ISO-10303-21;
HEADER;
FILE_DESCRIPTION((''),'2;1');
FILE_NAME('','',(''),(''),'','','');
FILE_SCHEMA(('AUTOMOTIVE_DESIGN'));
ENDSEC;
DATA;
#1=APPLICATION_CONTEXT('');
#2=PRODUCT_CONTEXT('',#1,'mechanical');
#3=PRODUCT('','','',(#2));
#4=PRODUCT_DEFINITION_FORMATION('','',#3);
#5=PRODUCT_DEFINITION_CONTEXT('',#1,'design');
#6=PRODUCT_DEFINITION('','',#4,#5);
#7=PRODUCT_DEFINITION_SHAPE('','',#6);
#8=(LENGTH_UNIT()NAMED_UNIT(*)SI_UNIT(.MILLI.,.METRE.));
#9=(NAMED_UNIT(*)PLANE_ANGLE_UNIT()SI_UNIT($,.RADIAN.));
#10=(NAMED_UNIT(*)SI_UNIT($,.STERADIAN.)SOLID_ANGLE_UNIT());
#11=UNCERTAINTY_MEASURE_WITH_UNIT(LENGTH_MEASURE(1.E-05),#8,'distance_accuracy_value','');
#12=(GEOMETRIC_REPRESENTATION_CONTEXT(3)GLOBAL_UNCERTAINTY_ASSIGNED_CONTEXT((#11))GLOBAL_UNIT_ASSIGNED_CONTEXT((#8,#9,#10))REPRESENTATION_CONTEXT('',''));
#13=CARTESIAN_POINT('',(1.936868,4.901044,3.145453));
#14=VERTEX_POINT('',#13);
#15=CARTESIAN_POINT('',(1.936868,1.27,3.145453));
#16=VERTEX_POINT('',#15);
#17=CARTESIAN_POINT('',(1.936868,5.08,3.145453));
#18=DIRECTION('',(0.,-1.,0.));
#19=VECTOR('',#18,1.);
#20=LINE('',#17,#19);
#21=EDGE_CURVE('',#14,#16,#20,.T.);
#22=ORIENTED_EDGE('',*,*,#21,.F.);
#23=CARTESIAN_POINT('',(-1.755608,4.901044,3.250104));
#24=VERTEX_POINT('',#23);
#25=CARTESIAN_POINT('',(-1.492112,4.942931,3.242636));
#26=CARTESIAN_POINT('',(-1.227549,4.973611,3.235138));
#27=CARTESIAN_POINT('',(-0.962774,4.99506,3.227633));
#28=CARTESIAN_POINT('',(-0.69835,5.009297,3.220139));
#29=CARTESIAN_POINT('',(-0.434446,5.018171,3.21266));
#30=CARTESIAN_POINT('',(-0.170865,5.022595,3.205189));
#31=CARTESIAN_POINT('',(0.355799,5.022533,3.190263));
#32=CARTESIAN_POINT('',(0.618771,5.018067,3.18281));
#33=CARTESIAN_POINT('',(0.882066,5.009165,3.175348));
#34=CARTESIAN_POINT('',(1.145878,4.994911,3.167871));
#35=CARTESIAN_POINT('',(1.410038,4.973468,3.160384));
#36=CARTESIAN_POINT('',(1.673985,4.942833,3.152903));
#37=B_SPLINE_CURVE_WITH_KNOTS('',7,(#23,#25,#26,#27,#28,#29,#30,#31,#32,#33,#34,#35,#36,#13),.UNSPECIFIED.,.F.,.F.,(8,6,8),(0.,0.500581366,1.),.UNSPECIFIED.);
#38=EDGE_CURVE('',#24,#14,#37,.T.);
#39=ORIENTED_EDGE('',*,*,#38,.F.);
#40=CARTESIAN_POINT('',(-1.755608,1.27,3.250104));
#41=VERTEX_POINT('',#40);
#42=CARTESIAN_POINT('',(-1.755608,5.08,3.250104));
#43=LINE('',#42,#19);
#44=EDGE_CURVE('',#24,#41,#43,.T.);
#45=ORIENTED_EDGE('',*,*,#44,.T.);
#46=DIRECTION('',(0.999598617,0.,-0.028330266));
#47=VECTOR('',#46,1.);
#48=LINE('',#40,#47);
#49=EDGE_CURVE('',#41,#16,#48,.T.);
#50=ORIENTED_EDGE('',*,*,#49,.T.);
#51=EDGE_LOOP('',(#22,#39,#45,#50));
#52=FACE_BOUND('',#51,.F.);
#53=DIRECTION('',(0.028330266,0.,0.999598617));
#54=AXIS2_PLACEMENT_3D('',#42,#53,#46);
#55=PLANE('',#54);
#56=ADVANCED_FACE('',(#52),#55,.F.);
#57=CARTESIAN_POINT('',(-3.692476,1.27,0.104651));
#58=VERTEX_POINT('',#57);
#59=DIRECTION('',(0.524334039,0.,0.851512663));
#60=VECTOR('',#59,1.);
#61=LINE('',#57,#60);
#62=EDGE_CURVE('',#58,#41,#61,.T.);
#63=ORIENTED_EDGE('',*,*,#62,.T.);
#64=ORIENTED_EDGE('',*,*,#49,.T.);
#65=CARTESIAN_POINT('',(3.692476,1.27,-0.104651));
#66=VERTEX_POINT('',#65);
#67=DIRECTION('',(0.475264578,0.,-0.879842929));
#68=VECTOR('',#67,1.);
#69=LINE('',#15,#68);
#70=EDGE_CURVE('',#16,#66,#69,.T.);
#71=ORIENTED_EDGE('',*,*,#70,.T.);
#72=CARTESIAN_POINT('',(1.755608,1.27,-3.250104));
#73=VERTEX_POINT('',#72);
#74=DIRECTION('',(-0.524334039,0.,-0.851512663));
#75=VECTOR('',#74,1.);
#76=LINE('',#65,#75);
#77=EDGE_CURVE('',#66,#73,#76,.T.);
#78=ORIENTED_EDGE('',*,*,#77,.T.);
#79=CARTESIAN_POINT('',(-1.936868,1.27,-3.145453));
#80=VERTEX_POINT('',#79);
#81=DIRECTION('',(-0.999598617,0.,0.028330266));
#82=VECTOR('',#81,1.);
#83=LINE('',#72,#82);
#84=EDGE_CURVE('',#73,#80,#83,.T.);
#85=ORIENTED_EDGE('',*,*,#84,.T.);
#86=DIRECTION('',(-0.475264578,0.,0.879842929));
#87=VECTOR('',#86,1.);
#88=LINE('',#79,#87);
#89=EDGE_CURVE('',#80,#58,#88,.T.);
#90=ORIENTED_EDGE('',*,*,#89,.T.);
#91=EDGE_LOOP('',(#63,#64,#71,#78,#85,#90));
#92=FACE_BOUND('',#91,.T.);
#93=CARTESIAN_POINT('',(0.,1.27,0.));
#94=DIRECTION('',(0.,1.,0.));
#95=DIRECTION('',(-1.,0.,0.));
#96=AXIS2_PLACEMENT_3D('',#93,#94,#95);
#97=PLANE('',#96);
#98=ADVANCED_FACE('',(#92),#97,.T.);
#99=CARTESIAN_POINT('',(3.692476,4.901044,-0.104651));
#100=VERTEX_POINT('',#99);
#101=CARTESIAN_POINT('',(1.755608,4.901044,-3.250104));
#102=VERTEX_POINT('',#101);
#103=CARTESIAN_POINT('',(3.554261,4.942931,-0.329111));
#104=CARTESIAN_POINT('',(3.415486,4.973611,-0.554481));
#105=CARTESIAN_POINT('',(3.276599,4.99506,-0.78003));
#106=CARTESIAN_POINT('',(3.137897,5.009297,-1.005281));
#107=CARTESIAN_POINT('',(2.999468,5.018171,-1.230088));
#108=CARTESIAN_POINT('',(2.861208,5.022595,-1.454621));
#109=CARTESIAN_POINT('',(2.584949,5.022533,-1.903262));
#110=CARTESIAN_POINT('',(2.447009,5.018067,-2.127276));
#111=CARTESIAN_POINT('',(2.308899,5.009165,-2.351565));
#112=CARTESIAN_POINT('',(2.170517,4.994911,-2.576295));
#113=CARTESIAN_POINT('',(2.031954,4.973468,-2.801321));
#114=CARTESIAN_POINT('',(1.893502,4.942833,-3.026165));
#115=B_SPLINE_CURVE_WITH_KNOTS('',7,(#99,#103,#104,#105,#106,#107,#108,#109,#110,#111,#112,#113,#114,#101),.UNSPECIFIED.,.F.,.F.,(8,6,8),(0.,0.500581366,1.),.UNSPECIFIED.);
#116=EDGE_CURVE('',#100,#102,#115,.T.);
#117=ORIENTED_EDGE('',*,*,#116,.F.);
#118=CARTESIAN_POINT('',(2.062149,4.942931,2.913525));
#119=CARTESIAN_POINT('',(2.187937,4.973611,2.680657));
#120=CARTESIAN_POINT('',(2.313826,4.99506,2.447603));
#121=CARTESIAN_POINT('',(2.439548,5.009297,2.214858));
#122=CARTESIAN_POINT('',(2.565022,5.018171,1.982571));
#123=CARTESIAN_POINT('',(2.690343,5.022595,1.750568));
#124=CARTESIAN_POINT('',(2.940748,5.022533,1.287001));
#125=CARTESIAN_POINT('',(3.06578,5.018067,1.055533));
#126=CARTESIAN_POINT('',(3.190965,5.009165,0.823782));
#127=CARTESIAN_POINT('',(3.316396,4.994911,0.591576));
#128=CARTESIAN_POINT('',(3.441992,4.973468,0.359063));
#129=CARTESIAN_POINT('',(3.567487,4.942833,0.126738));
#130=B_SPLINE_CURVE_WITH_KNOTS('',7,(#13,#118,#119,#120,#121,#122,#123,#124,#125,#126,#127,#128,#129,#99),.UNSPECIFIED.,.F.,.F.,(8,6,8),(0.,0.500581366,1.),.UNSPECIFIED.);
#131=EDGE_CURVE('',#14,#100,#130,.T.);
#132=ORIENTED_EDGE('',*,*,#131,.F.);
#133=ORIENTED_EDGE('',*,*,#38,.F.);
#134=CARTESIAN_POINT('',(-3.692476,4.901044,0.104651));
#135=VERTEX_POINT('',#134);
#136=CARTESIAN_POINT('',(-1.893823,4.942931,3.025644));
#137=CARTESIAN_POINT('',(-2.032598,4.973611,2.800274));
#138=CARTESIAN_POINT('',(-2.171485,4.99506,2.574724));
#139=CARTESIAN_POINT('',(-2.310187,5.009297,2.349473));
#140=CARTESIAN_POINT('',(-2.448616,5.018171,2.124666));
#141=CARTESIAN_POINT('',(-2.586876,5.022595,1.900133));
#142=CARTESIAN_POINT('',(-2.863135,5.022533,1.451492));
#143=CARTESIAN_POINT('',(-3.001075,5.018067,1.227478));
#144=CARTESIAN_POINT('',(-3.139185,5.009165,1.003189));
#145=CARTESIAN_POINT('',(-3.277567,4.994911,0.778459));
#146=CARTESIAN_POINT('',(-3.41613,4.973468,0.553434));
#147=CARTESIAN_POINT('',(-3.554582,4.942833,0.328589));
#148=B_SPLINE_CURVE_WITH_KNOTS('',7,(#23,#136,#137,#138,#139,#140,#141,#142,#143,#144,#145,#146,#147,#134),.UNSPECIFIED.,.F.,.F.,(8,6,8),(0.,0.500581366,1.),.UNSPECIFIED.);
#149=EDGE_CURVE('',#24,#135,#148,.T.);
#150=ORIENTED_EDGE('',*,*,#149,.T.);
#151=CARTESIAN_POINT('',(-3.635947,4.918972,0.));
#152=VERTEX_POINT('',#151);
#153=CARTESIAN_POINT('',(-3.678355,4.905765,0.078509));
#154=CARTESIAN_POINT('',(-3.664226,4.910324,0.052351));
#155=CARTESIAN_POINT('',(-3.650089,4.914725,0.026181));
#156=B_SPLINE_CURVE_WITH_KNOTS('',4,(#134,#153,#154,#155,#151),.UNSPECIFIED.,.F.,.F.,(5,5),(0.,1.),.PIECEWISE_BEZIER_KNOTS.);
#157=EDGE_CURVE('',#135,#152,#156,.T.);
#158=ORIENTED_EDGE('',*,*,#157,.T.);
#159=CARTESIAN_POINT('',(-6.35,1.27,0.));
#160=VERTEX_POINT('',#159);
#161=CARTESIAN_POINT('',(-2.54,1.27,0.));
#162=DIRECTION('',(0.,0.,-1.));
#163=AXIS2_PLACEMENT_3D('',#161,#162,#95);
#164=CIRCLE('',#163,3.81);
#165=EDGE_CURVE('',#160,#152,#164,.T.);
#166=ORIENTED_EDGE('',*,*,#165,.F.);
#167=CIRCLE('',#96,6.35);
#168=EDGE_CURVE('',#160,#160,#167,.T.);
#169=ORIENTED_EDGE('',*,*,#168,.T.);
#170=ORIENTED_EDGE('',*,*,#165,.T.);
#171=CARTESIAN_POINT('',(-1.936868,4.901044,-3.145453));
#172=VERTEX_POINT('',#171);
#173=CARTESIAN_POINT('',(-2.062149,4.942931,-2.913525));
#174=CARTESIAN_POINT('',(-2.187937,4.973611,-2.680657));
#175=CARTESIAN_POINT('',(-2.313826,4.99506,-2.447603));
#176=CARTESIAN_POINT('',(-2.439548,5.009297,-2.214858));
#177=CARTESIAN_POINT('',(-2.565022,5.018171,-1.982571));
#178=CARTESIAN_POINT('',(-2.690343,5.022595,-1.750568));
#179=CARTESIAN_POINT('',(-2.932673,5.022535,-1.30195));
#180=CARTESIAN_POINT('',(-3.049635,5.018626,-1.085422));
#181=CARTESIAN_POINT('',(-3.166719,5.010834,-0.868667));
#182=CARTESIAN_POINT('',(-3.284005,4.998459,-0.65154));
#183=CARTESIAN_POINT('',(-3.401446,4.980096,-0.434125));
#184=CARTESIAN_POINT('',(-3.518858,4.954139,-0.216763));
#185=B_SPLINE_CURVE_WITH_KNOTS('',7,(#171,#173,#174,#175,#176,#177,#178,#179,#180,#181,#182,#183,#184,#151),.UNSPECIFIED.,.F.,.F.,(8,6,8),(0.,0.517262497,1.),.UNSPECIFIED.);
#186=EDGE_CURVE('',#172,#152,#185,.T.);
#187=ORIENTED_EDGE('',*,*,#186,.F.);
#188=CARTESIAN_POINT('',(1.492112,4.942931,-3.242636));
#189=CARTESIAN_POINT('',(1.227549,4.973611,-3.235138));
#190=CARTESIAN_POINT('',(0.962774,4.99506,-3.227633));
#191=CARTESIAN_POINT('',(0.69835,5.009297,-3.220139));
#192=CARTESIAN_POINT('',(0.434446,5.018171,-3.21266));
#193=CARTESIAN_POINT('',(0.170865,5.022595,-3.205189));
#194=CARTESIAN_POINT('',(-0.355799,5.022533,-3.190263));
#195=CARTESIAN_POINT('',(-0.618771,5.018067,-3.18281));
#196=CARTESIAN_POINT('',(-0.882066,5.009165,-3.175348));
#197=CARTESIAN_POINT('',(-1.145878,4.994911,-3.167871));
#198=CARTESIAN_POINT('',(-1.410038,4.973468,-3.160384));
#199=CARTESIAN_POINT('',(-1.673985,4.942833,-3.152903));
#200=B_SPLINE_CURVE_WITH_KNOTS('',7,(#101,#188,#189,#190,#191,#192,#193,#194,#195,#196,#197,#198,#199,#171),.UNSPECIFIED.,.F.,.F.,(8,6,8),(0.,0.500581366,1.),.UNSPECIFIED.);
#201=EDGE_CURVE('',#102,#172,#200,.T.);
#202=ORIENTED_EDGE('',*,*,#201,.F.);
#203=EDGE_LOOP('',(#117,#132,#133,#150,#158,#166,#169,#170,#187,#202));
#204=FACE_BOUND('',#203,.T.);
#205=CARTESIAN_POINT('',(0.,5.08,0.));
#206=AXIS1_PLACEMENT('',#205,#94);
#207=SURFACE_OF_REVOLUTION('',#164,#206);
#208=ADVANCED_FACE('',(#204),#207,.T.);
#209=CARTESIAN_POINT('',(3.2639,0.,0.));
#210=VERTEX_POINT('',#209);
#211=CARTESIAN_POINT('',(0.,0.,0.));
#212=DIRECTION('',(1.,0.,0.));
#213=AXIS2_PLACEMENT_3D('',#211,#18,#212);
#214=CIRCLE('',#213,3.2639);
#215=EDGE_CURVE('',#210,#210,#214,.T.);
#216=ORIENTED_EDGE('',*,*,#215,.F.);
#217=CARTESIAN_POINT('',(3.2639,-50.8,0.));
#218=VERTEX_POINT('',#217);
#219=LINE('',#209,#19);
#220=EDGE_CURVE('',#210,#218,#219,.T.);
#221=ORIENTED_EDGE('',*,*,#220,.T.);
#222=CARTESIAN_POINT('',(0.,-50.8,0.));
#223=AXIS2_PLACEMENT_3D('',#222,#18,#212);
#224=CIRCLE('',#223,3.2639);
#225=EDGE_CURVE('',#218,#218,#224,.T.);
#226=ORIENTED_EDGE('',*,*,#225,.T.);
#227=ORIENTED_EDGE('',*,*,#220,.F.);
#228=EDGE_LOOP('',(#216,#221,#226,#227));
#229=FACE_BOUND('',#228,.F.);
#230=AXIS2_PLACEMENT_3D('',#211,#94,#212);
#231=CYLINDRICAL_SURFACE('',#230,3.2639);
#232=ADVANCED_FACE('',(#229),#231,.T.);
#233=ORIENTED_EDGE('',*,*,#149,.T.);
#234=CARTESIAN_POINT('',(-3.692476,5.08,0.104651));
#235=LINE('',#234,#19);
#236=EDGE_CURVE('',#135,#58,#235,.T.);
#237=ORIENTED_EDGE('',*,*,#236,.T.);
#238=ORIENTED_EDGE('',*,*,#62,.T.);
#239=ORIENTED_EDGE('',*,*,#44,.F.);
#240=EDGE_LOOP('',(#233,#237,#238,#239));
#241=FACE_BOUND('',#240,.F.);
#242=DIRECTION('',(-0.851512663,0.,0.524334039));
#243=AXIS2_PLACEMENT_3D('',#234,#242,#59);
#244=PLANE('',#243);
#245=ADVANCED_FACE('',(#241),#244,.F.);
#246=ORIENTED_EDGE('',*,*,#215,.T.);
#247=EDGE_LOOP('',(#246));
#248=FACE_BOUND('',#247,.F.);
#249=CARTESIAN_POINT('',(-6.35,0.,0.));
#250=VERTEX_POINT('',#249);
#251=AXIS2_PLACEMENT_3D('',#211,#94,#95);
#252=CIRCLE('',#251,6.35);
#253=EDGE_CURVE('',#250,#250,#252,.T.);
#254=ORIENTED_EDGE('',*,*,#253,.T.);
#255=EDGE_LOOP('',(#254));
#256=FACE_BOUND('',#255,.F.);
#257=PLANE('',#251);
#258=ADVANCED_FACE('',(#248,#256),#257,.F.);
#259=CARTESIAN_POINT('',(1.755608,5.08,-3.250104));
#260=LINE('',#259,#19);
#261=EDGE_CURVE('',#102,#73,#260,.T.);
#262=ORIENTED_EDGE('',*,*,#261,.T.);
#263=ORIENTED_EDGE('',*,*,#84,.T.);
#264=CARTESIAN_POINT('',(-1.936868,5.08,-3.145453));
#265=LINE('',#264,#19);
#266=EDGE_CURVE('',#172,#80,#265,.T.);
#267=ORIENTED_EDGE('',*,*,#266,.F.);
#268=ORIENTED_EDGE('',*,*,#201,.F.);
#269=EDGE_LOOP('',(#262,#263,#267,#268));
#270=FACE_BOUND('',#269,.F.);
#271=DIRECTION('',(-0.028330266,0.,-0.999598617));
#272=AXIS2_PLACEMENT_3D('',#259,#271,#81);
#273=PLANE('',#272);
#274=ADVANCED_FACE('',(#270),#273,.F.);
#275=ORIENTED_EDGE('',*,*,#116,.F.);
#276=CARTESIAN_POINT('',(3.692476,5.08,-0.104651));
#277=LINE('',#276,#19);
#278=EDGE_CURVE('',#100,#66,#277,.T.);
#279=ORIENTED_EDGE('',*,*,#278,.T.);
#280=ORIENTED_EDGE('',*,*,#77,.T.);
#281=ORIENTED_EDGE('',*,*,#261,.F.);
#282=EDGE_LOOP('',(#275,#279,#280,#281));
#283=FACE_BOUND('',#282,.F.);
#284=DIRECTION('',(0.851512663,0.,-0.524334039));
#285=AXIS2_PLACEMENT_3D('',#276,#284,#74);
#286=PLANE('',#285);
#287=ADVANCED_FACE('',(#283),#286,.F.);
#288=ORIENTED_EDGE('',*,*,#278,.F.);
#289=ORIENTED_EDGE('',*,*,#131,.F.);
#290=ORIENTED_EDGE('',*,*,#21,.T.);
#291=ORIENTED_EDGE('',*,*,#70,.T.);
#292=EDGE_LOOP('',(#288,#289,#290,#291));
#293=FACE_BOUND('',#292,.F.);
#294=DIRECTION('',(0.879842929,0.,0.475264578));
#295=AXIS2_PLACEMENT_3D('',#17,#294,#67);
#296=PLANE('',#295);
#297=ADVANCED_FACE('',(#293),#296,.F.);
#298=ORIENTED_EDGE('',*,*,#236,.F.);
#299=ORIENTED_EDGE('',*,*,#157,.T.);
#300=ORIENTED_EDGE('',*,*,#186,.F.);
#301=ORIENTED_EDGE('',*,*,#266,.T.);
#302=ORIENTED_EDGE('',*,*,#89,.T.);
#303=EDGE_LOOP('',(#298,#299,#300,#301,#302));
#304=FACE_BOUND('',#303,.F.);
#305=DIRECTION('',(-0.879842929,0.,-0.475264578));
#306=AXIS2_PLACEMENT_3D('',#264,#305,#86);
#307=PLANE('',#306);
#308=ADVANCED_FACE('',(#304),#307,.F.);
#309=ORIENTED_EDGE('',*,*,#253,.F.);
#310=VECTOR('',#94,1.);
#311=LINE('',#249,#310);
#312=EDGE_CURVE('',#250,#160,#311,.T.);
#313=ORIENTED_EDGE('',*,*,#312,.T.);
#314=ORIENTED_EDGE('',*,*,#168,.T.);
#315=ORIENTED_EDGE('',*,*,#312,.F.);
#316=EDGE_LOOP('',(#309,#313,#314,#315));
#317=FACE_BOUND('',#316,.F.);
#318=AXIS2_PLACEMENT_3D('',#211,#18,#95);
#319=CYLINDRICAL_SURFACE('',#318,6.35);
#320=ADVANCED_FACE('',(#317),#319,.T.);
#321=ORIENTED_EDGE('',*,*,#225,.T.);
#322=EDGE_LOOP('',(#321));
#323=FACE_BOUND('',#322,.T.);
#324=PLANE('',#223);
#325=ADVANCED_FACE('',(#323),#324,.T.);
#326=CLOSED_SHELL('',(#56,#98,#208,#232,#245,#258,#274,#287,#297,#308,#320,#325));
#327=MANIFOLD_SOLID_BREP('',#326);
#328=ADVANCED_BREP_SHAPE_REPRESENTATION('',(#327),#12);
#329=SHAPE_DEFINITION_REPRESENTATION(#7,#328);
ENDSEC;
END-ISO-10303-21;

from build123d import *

# Parameters (mm, degrees)
F0_R     = 3.2639
F1_DEPTH = 50.8
F2_R     = 6.35
F2_R_2   = 3.2639
F3_DEPTH = 5.08
F5_DEPTH = 3.81


# Not quite as in the source:
# - a fillet or chamfer that OpenCascade refuses, or shapes differently, is made with other operations: its cross-section is extruded or revolved along the edge and cut away or added


with BuildPart() as f1:
    # F0 (on Front) → F1 (new body)
    with BuildSketch(Plane.XZ):
        Circle(F0_R)
    extrude(amount=F1_DEPTH)

    # F2 (on face) → F3 (join)
    with BuildSketch(Plane(origin=(0, 0, 0), x_dir=(-1, 0, 0), z_dir=(0, 1, 0))):
        Circle(F2_R)
        Circle(F2_R_2, mode=Mode.SUBTRACT)
        Circle(F2_R_2)
    extrude(amount=F3_DEPTH)

    # F4 (on face) → F5 (cut)
    with BuildSketch(Plane(origin=(0, 5.08, 0), x_dir=(-1, 0, 0), z_dir=(0, 1, 0))):
        Polygon((-1.9368684152, 3.1454528216), (-3.6924762575, -0.1046508405), (-1.7556078423, -3.2501036622), (1.9368684152, -3.1454528216), (3.6924762575, 0.1046508405), (1.7556078423, 3.2501036622), align=None)
    extrude(amount=-F5_DEPTH, mode=Mode.SUBTRACT)

    # F6: fillet of radius 3.81 on 1 edges, made by hand

    # F6_s1 → F6_t2 (revolve, cut)
    with BuildSketch(Plane.XY):
        with BuildLine():
            ThreePointArc((-6.35, 1.27), (-5.2340768363, 3.9640768363), (-2.54, 5.08))
            Line((-2.54, 5.08), (-6.35, 5.08))
            Line((-6.35, 5.08), (-6.35, 1.27))
        make_face()
    revolve(axis=Axis((0, 5.08, 0), (0, 1, 0)), mode=Mode.SUBTRACT)


solid = f1.part
